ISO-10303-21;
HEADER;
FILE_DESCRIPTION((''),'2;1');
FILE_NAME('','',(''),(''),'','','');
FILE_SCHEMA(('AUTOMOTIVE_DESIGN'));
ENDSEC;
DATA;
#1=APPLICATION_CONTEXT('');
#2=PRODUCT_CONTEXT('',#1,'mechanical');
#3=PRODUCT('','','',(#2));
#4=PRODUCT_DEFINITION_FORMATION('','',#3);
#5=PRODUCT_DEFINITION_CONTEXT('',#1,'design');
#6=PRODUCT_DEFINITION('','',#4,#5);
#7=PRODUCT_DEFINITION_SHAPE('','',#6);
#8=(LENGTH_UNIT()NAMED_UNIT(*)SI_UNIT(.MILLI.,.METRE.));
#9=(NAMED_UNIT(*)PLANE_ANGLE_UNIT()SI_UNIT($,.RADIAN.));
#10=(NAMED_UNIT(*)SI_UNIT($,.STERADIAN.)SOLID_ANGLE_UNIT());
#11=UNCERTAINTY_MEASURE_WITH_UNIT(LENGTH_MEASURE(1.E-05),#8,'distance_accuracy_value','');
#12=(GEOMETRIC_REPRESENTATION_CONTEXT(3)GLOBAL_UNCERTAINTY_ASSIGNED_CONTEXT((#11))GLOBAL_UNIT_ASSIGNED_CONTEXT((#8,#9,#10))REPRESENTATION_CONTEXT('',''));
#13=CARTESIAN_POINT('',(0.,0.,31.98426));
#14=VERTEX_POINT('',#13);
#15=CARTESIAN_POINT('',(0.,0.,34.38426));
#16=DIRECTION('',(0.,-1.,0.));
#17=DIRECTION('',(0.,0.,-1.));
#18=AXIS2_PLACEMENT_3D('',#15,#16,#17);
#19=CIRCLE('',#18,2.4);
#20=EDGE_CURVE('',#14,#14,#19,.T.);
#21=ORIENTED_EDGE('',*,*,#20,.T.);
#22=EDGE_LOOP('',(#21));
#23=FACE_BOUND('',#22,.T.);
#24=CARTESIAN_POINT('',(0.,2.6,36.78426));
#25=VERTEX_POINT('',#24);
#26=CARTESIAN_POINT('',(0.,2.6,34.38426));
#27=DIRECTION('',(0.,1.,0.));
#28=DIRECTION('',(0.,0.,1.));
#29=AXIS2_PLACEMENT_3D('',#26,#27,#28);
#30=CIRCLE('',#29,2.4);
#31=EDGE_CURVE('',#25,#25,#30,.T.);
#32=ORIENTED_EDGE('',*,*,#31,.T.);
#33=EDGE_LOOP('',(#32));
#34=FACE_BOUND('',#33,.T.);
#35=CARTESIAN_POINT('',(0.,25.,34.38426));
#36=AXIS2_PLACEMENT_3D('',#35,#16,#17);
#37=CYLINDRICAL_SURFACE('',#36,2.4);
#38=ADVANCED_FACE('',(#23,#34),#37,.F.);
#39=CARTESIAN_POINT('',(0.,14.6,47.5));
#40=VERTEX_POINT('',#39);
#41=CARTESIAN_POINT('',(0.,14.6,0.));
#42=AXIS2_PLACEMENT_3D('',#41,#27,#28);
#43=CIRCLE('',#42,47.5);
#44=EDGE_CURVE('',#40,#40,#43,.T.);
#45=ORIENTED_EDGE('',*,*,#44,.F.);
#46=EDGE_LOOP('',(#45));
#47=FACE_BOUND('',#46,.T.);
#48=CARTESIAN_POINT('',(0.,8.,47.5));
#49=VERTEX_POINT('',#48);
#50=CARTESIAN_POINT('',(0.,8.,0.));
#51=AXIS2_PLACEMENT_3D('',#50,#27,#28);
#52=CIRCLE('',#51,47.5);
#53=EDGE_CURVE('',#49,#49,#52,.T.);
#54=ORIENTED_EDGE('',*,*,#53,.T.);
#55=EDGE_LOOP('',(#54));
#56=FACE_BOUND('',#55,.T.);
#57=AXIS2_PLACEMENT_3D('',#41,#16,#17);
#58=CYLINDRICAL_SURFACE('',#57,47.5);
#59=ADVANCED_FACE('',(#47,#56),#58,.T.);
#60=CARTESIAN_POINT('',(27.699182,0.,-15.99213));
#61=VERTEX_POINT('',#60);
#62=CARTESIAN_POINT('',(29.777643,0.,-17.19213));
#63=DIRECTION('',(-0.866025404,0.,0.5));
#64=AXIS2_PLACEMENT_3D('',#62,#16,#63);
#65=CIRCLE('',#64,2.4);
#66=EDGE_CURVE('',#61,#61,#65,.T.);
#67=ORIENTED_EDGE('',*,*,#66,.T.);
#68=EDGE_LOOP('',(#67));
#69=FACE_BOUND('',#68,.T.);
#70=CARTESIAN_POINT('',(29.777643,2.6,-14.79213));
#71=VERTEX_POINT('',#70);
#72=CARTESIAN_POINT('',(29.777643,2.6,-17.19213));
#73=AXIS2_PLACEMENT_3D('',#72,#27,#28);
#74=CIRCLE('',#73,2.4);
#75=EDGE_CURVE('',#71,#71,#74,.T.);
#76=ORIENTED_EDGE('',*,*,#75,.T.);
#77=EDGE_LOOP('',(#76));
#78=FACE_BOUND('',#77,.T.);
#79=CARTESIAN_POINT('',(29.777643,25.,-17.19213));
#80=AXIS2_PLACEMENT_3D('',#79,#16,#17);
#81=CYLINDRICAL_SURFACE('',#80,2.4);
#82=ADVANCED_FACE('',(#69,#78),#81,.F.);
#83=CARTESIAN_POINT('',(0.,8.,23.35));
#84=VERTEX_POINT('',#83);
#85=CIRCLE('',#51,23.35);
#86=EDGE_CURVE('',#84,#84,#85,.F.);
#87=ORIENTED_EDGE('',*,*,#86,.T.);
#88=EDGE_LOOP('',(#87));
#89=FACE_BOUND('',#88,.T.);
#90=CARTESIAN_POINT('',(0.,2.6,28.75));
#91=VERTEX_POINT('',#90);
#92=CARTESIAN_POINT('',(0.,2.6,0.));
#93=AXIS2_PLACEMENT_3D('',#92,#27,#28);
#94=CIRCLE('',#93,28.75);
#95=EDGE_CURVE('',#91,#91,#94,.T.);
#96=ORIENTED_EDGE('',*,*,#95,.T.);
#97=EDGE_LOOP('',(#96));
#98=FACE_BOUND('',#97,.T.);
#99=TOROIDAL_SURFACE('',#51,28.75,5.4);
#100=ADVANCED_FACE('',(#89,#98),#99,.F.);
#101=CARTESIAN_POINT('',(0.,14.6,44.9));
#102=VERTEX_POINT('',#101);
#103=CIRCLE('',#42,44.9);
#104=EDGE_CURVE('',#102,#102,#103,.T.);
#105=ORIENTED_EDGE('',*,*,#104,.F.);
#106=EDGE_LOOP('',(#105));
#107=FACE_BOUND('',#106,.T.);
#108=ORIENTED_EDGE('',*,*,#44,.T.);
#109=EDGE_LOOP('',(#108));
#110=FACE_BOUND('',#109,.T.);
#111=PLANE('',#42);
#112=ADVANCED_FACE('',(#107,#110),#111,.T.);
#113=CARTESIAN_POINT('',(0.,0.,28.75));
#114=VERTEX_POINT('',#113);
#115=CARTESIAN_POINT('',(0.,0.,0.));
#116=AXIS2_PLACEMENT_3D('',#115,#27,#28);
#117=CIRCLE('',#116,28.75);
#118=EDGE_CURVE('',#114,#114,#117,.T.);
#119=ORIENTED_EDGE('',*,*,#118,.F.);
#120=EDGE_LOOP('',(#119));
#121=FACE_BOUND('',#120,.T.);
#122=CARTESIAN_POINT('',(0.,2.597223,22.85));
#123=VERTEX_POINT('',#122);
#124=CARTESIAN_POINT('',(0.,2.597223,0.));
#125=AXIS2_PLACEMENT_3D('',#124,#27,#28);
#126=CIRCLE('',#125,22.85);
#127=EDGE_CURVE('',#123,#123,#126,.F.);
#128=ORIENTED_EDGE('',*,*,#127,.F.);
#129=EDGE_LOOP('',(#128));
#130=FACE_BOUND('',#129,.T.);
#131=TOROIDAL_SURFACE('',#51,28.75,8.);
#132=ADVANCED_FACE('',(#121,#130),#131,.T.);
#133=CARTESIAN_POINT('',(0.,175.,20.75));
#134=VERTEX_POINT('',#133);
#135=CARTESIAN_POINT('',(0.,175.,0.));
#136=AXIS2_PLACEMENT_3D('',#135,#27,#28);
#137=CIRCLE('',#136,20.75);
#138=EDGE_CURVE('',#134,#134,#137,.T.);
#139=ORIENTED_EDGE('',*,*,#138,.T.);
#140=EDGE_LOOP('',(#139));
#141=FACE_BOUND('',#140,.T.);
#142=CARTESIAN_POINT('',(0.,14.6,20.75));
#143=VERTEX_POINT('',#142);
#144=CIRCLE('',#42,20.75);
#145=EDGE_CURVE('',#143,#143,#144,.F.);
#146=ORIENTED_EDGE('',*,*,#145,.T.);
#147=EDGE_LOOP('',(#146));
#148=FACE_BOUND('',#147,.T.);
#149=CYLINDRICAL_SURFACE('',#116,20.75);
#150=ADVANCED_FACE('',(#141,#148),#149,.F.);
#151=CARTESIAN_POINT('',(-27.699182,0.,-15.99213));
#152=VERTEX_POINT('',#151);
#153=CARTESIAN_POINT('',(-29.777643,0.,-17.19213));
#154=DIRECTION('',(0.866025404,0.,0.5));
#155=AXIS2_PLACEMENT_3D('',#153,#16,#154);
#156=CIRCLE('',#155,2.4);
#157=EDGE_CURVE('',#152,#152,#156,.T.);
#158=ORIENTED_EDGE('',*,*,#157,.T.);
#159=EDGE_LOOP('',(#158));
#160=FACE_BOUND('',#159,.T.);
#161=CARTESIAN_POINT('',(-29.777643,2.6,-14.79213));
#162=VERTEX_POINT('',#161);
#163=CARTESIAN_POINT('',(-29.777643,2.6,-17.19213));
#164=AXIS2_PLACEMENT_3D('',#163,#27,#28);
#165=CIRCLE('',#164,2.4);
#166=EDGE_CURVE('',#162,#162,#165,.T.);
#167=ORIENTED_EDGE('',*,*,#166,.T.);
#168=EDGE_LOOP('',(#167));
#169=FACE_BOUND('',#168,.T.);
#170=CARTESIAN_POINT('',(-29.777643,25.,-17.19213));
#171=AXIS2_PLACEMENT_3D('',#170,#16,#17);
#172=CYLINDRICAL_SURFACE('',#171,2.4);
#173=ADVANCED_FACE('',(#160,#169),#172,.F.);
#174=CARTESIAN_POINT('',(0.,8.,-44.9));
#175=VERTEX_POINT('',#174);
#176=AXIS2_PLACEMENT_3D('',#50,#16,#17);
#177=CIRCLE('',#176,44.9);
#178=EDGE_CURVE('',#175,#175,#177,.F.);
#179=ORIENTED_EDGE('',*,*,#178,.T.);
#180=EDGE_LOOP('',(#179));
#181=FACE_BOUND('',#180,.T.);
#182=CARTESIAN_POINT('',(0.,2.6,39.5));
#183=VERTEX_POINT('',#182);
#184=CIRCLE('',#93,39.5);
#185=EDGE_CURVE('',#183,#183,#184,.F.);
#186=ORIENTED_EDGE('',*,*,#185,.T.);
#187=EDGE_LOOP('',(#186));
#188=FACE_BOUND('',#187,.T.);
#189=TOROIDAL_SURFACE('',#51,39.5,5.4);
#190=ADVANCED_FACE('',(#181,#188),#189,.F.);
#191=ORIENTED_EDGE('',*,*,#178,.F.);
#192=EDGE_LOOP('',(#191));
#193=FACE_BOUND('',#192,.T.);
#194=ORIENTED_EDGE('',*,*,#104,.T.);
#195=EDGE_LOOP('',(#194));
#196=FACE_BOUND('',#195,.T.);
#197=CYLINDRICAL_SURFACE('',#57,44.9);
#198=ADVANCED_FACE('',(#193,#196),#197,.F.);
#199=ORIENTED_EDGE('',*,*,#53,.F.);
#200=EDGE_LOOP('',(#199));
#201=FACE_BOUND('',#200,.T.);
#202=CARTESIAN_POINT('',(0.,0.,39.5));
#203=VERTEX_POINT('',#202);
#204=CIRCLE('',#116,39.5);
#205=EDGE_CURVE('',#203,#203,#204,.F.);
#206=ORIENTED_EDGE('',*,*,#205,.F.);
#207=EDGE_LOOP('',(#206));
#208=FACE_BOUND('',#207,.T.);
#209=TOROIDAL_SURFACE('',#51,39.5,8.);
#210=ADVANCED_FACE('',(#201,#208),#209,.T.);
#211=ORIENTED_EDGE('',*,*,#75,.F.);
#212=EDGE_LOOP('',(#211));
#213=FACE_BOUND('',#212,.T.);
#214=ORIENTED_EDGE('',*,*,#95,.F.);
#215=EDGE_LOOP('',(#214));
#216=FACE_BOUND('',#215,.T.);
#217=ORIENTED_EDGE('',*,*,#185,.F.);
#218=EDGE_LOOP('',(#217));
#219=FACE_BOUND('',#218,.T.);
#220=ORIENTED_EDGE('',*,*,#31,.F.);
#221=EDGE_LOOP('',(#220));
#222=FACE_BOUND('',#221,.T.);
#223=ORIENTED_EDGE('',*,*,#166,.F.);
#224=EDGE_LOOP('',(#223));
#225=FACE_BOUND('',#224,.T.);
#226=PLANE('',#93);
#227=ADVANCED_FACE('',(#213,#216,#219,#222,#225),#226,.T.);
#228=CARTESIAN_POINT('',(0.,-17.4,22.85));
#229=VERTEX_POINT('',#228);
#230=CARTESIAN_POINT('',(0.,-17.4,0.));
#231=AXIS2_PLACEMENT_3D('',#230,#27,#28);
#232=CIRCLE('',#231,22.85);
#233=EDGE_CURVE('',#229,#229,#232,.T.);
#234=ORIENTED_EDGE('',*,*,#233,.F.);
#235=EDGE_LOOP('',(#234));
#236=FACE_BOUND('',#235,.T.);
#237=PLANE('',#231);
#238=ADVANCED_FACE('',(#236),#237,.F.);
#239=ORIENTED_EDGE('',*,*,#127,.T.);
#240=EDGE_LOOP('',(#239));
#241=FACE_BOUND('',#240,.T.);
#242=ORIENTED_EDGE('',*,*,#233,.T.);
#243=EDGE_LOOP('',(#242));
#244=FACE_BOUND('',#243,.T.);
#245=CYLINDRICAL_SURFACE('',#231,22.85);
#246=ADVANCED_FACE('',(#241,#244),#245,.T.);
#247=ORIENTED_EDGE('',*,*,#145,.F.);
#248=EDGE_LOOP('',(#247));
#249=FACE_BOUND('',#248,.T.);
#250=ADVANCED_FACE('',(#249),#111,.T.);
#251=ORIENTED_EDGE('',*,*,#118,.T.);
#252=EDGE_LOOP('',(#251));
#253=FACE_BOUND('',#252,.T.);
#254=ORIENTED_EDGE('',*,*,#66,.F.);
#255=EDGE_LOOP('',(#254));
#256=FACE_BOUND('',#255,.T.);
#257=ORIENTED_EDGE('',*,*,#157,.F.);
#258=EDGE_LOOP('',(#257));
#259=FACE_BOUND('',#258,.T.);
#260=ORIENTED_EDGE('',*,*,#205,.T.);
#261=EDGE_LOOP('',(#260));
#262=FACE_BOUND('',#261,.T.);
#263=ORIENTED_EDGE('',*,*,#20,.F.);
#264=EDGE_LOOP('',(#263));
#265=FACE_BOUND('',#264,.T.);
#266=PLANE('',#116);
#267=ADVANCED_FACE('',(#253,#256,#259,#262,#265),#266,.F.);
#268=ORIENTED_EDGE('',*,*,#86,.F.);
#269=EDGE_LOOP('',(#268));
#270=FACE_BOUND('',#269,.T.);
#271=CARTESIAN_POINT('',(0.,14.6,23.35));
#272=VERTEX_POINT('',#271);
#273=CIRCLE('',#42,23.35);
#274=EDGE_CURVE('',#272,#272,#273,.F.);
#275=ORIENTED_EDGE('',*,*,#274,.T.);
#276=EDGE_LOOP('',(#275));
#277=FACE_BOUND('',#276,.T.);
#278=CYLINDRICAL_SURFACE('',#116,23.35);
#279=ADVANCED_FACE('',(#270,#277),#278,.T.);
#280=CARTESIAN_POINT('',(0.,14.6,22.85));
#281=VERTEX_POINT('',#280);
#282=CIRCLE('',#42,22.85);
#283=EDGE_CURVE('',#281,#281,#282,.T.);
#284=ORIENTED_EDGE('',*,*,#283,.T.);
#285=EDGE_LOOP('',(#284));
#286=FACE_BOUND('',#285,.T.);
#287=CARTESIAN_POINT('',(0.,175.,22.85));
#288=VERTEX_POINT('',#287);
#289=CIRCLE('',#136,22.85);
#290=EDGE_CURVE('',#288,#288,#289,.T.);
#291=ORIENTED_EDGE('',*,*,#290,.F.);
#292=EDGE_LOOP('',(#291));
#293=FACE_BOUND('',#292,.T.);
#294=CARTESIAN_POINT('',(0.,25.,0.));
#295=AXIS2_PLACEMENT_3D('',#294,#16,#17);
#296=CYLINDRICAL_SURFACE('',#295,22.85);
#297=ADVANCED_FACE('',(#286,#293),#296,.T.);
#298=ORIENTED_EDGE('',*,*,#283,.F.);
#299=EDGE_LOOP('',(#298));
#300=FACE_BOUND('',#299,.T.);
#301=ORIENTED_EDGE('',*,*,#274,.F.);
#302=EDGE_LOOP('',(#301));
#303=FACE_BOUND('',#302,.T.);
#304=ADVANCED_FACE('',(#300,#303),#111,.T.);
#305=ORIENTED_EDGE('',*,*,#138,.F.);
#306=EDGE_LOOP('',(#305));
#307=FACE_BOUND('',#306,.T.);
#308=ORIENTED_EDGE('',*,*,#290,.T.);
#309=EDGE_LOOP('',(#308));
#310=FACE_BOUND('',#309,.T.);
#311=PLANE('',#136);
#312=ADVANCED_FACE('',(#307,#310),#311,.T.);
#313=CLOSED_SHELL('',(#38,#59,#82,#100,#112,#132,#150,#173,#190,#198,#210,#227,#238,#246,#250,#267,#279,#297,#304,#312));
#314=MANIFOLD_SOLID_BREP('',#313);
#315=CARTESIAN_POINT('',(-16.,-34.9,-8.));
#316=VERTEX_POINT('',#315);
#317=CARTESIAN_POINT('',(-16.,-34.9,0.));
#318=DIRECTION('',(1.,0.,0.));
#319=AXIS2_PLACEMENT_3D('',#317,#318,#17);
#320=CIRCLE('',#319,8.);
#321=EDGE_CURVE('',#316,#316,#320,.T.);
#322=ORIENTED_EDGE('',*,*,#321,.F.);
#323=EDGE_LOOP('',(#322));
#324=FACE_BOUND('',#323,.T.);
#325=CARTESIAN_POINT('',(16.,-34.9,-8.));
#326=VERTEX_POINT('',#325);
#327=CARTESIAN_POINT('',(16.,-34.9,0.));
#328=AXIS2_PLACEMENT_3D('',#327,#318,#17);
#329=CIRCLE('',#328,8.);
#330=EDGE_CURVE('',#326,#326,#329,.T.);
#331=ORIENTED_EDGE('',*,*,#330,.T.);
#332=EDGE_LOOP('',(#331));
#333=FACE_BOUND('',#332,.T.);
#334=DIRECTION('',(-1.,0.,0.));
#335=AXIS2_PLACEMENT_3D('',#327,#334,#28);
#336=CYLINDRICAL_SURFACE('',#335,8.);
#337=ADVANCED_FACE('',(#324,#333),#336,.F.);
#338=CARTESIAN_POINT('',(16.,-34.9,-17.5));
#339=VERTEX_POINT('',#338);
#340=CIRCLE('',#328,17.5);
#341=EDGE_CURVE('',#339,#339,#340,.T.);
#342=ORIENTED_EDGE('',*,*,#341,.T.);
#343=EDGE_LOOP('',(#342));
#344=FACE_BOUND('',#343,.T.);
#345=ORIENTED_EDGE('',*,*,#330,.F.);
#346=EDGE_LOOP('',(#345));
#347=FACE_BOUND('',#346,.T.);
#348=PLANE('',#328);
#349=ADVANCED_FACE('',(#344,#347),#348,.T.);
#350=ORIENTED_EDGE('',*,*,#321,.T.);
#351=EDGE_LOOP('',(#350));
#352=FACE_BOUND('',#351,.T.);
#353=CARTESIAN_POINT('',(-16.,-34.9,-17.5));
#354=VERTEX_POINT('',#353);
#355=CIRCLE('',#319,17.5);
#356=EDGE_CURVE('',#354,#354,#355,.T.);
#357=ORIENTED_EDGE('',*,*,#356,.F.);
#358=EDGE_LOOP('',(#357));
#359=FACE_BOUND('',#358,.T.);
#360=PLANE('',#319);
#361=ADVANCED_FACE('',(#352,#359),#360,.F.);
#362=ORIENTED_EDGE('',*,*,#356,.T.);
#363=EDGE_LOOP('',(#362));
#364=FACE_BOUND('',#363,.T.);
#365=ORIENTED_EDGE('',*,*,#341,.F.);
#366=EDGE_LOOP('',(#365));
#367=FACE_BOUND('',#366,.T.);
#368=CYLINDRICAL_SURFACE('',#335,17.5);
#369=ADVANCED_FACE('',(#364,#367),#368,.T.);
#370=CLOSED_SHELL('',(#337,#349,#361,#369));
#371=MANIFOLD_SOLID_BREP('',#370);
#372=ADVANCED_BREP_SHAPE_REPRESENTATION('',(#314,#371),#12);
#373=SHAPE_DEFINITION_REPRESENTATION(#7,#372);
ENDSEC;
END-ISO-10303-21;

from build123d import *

# Parameters (mm, degrees)
SKETCH1_R           = 47.5
BOSS_EXTRUDE2_DEPTH = 14.6
SKETCH4_R           = 22.85
BOSS_EXTRUDE3_DEPTH = 10.4
SKETCH5_R           = 20.75
CUT_EXTRUDE3_DEPTH  = 72.676355934
FILLET2_R           = 8
FILLET3_R           = 8
SKETCH6_R           = 2.4
CUT_EXTRUDE4_DEPTH  = 72.676355934
CIRPATTERN1_COUNT   = 3
SKETCH7_R           = 22.85
SKETCH7_R_2         = 20.75
BOSS_EXTRUDE4_DEPTH = 150
BOSS_EXTRUDE5_START = -32
SKETCH4_2_R         = 22.85
BOSS_EXTRUDE5_DEPTH = 32
SKETCH8_R           = 17.5
SKETCH8_R_2         = 8
BOSS_EXTRUDE6_DEPTH = 16


# Read off the part's stored shape, not the designer's step: Shell2
with BuildPart() as part:
    # Sketch1 → Boss-Extrude2 (new body)
    with BuildSketch(Plane(origin=(0, 0, 0), x_dir=(1, 0, 0), z_dir=(0, 1, 0))):
        with Locations(Location((0, 0, 0), (0, 0, 270))):
            Circle(SKETCH1_R)
    extrude(amount=BOSS_EXTRUDE2_DEPTH)

    # Sketch4 → Boss-Extrude3 (add)
    with BuildSketch(Plane(origin=(0, 14.6, 0), x_dir=(1, 0, 0), z_dir=(0, 1, 0))):
        with Locations(Location((0, 0, 0), (0, 0, 270))):
            Circle(SKETCH4_R)
    extrude(amount=BOSS_EXTRUDE3_DEPTH)

    # Sketch5 → Cut-Extrude3 (cut, through all)
    with BuildSketch(Plane(origin=(0, 25, 0), x_dir=(1, 0, 0), z_dir=(0, 1, 0))):
        with Locations(Location((0, 0, 0), (0, 0, 270))):
            Circle(SKETCH5_R)
    extrude(amount=-CUT_EXTRUDE3_DEPTH, mode=Mode.SUBTRACT)

    # Fillet2
    fillet2_edges = [part.edges().sort_by_distance(p)[0] for p in [
        (0, 0, -47.5),
    ]]
    fillet(fillet2_edges, radius=FILLET2_R)

    # Fillet3
    fillet3_edges = [part.edges().sort_by_distance(p)[0] for p in [
        (0, 0, -20.75),
    ]]
    fillet(fillet3_edges, radius=FILLET3_R)

    # Shell2 outline → Shell2 (revolve, cut)
    with BuildSketch(Plane.XY):
        with BuildLine():
            Line((44.9, 8), (44.9, 14.6))
            Line((44.9, 14.6), (23.35, 14.6))
            Line((23.35, 14.6), (23.35, 8))
            ThreePointArc((23.35, 8), (24.931623382, 4.181623382), (28.75, 2.6))
            Line((28.75, 2.6), (39.5, 2.6))
            ThreePointArc((39.5, 2.6), (43.318376618, 4.181623382), (44.9, 8))
        make_face()
    revolve(axis=Axis((0, 0, 0), (0, 1, 0)), mode=Mode.SUBTRACT)

    # Sketch6 → Cut-Extrude4 (cut, through all)
    with BuildSketch(Plane(origin=(0, 0, 0), x_dir=(-1, 0, 0), z_dir=(0, -1, 0))):
        with Locations(Location((0, -34.384260124, 0), (0, 0, 90))):
            Circle(SKETCH6_R)
    cut_extrude4 = extrude(amount=-CUT_EXTRUDE4_DEPTH, mode=Mode.SUBTRACT)

    # CirPattern1: Cut-Extrude4 ×3 about axis
    cirpattern1_axis = Axis((0, 0, 0), (0, 1, 0))
    for i in range(1, CIRPATTERN1_COUNT):
        add(cut_extrude4.rotate(cirpattern1_axis, i * 360 / CIRPATTERN1_COUNT), mode=Mode.SUBTRACT)

    # Sketch7 → Boss-Extrude4 (add)
    with BuildSketch(Plane(origin=(0, 25, 0), x_dir=(1, 0, 0), z_dir=(0, 1, 0))):
        with Locations(Location((0, 0, 0), (0, 0, 270))):
            Circle(SKETCH7_R)
        with Locations(Location((0, 0, 0), (0, 0, 270))):
            Circle(SKETCH7_R_2, mode=Mode.SUBTRACT)
    extrude(amount=BOSS_EXTRUDE4_DEPTH)

    # Sketch4<2> → Boss-Extrude5 (add)
    with BuildSketch(Plane(origin=(0, 14.6, 0), x_dir=(1, 0, 0), z_dir=(0, 1, 0)).offset(BOSS_EXTRUDE5_START)):
        with Locations(Location((0, 0, 0), (0, 0, 270))):
            Circle(SKETCH4_2_R)
    extrude(amount=BOSS_EXTRUDE5_DEPTH)


with BuildPart() as body_2:
    # Sketch8 → Boss-Extrude6 (new, symmetric)
    with BuildSketch(Plane(origin=(0, 0, 0), x_dir=(0, 0, -1), z_dir=(1, 0, 0))):
        with Locations((0, -34.9)):
            Circle(SKETCH8_R)
        with Locations((0, -34.9)):
            Circle(SKETCH8_R_2, mode=Mode.SUBTRACT)
    extrude(amount=BOSS_EXTRUDE6_DEPTH, both=True)


solid = Compound([part.part, body_2.part])
